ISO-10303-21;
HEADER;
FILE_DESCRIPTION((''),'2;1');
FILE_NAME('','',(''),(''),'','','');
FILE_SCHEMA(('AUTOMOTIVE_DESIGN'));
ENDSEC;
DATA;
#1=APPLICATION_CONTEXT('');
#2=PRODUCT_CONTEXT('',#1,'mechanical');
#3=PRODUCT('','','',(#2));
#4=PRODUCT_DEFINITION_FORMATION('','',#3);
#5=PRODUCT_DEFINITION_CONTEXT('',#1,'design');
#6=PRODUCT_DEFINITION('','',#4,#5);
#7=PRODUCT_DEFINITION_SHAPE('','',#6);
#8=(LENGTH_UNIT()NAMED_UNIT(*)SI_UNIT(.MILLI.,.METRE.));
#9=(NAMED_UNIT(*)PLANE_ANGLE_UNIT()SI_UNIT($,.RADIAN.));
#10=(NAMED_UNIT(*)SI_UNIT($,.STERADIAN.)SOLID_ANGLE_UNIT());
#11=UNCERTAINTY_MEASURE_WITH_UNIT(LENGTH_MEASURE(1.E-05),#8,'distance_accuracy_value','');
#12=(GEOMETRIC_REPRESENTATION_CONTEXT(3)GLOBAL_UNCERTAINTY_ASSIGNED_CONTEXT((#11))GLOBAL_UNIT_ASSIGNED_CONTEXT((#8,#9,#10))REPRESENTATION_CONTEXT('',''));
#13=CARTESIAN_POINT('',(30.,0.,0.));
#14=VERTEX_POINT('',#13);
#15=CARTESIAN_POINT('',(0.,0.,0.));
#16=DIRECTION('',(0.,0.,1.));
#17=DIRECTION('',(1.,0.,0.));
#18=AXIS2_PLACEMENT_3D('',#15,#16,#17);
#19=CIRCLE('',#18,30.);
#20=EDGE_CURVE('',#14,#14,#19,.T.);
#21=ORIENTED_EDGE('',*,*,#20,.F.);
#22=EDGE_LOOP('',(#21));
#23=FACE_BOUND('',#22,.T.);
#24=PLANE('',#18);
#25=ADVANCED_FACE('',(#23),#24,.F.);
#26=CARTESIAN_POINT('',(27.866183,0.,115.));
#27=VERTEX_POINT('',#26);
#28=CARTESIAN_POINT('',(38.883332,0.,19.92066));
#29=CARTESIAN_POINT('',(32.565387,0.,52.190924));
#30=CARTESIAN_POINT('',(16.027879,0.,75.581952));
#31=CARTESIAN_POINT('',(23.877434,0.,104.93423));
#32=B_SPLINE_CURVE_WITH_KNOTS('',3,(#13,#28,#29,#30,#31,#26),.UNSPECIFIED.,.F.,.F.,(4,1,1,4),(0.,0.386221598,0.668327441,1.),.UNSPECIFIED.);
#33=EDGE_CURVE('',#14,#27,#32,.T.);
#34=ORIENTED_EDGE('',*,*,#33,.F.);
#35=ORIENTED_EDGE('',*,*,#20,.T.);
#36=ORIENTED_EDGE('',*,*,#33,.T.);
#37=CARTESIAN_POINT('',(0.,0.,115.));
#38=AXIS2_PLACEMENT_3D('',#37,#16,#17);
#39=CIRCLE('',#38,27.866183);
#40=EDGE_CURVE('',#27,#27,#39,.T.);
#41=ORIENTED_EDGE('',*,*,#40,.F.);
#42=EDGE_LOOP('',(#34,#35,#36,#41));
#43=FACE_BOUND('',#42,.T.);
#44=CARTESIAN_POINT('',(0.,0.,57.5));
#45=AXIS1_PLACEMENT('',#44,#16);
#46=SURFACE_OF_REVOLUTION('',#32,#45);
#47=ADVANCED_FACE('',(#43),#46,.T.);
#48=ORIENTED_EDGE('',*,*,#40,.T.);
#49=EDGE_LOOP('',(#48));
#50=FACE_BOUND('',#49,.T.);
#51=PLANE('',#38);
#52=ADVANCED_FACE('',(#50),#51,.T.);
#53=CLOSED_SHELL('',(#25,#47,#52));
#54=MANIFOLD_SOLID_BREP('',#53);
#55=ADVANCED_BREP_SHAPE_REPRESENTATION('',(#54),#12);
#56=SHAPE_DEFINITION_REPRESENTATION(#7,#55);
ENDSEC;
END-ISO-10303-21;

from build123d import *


with BuildPart() as f1:
    # F0 (on Front) → F1 (revolve)
    with BuildSketch(Plane.XZ):
        with BuildLine():
            Line((0, 115), (0, 0))
            Line((0, 0), (30, 0))
            add(Edge.make_bspline(
                [(30, 0), (38.8833321077, 19.9206599167), (32.5653867482, 52.190924217), (16.0278789821, 75.5819524262), (23.8774344325, 104.9342304468), (27.8661828488, 115)],
                knots=[0, 0, 0, 0, 0.3862215976, 0.6683274414, 1, 1, 1, 1], degree=3))
            Line((27.8661828488, 115), (0, 115))
        make_face()
    revolve(axis=Axis((0, 0, 57.5), (0, 0, 1)))


solid = f1.part
